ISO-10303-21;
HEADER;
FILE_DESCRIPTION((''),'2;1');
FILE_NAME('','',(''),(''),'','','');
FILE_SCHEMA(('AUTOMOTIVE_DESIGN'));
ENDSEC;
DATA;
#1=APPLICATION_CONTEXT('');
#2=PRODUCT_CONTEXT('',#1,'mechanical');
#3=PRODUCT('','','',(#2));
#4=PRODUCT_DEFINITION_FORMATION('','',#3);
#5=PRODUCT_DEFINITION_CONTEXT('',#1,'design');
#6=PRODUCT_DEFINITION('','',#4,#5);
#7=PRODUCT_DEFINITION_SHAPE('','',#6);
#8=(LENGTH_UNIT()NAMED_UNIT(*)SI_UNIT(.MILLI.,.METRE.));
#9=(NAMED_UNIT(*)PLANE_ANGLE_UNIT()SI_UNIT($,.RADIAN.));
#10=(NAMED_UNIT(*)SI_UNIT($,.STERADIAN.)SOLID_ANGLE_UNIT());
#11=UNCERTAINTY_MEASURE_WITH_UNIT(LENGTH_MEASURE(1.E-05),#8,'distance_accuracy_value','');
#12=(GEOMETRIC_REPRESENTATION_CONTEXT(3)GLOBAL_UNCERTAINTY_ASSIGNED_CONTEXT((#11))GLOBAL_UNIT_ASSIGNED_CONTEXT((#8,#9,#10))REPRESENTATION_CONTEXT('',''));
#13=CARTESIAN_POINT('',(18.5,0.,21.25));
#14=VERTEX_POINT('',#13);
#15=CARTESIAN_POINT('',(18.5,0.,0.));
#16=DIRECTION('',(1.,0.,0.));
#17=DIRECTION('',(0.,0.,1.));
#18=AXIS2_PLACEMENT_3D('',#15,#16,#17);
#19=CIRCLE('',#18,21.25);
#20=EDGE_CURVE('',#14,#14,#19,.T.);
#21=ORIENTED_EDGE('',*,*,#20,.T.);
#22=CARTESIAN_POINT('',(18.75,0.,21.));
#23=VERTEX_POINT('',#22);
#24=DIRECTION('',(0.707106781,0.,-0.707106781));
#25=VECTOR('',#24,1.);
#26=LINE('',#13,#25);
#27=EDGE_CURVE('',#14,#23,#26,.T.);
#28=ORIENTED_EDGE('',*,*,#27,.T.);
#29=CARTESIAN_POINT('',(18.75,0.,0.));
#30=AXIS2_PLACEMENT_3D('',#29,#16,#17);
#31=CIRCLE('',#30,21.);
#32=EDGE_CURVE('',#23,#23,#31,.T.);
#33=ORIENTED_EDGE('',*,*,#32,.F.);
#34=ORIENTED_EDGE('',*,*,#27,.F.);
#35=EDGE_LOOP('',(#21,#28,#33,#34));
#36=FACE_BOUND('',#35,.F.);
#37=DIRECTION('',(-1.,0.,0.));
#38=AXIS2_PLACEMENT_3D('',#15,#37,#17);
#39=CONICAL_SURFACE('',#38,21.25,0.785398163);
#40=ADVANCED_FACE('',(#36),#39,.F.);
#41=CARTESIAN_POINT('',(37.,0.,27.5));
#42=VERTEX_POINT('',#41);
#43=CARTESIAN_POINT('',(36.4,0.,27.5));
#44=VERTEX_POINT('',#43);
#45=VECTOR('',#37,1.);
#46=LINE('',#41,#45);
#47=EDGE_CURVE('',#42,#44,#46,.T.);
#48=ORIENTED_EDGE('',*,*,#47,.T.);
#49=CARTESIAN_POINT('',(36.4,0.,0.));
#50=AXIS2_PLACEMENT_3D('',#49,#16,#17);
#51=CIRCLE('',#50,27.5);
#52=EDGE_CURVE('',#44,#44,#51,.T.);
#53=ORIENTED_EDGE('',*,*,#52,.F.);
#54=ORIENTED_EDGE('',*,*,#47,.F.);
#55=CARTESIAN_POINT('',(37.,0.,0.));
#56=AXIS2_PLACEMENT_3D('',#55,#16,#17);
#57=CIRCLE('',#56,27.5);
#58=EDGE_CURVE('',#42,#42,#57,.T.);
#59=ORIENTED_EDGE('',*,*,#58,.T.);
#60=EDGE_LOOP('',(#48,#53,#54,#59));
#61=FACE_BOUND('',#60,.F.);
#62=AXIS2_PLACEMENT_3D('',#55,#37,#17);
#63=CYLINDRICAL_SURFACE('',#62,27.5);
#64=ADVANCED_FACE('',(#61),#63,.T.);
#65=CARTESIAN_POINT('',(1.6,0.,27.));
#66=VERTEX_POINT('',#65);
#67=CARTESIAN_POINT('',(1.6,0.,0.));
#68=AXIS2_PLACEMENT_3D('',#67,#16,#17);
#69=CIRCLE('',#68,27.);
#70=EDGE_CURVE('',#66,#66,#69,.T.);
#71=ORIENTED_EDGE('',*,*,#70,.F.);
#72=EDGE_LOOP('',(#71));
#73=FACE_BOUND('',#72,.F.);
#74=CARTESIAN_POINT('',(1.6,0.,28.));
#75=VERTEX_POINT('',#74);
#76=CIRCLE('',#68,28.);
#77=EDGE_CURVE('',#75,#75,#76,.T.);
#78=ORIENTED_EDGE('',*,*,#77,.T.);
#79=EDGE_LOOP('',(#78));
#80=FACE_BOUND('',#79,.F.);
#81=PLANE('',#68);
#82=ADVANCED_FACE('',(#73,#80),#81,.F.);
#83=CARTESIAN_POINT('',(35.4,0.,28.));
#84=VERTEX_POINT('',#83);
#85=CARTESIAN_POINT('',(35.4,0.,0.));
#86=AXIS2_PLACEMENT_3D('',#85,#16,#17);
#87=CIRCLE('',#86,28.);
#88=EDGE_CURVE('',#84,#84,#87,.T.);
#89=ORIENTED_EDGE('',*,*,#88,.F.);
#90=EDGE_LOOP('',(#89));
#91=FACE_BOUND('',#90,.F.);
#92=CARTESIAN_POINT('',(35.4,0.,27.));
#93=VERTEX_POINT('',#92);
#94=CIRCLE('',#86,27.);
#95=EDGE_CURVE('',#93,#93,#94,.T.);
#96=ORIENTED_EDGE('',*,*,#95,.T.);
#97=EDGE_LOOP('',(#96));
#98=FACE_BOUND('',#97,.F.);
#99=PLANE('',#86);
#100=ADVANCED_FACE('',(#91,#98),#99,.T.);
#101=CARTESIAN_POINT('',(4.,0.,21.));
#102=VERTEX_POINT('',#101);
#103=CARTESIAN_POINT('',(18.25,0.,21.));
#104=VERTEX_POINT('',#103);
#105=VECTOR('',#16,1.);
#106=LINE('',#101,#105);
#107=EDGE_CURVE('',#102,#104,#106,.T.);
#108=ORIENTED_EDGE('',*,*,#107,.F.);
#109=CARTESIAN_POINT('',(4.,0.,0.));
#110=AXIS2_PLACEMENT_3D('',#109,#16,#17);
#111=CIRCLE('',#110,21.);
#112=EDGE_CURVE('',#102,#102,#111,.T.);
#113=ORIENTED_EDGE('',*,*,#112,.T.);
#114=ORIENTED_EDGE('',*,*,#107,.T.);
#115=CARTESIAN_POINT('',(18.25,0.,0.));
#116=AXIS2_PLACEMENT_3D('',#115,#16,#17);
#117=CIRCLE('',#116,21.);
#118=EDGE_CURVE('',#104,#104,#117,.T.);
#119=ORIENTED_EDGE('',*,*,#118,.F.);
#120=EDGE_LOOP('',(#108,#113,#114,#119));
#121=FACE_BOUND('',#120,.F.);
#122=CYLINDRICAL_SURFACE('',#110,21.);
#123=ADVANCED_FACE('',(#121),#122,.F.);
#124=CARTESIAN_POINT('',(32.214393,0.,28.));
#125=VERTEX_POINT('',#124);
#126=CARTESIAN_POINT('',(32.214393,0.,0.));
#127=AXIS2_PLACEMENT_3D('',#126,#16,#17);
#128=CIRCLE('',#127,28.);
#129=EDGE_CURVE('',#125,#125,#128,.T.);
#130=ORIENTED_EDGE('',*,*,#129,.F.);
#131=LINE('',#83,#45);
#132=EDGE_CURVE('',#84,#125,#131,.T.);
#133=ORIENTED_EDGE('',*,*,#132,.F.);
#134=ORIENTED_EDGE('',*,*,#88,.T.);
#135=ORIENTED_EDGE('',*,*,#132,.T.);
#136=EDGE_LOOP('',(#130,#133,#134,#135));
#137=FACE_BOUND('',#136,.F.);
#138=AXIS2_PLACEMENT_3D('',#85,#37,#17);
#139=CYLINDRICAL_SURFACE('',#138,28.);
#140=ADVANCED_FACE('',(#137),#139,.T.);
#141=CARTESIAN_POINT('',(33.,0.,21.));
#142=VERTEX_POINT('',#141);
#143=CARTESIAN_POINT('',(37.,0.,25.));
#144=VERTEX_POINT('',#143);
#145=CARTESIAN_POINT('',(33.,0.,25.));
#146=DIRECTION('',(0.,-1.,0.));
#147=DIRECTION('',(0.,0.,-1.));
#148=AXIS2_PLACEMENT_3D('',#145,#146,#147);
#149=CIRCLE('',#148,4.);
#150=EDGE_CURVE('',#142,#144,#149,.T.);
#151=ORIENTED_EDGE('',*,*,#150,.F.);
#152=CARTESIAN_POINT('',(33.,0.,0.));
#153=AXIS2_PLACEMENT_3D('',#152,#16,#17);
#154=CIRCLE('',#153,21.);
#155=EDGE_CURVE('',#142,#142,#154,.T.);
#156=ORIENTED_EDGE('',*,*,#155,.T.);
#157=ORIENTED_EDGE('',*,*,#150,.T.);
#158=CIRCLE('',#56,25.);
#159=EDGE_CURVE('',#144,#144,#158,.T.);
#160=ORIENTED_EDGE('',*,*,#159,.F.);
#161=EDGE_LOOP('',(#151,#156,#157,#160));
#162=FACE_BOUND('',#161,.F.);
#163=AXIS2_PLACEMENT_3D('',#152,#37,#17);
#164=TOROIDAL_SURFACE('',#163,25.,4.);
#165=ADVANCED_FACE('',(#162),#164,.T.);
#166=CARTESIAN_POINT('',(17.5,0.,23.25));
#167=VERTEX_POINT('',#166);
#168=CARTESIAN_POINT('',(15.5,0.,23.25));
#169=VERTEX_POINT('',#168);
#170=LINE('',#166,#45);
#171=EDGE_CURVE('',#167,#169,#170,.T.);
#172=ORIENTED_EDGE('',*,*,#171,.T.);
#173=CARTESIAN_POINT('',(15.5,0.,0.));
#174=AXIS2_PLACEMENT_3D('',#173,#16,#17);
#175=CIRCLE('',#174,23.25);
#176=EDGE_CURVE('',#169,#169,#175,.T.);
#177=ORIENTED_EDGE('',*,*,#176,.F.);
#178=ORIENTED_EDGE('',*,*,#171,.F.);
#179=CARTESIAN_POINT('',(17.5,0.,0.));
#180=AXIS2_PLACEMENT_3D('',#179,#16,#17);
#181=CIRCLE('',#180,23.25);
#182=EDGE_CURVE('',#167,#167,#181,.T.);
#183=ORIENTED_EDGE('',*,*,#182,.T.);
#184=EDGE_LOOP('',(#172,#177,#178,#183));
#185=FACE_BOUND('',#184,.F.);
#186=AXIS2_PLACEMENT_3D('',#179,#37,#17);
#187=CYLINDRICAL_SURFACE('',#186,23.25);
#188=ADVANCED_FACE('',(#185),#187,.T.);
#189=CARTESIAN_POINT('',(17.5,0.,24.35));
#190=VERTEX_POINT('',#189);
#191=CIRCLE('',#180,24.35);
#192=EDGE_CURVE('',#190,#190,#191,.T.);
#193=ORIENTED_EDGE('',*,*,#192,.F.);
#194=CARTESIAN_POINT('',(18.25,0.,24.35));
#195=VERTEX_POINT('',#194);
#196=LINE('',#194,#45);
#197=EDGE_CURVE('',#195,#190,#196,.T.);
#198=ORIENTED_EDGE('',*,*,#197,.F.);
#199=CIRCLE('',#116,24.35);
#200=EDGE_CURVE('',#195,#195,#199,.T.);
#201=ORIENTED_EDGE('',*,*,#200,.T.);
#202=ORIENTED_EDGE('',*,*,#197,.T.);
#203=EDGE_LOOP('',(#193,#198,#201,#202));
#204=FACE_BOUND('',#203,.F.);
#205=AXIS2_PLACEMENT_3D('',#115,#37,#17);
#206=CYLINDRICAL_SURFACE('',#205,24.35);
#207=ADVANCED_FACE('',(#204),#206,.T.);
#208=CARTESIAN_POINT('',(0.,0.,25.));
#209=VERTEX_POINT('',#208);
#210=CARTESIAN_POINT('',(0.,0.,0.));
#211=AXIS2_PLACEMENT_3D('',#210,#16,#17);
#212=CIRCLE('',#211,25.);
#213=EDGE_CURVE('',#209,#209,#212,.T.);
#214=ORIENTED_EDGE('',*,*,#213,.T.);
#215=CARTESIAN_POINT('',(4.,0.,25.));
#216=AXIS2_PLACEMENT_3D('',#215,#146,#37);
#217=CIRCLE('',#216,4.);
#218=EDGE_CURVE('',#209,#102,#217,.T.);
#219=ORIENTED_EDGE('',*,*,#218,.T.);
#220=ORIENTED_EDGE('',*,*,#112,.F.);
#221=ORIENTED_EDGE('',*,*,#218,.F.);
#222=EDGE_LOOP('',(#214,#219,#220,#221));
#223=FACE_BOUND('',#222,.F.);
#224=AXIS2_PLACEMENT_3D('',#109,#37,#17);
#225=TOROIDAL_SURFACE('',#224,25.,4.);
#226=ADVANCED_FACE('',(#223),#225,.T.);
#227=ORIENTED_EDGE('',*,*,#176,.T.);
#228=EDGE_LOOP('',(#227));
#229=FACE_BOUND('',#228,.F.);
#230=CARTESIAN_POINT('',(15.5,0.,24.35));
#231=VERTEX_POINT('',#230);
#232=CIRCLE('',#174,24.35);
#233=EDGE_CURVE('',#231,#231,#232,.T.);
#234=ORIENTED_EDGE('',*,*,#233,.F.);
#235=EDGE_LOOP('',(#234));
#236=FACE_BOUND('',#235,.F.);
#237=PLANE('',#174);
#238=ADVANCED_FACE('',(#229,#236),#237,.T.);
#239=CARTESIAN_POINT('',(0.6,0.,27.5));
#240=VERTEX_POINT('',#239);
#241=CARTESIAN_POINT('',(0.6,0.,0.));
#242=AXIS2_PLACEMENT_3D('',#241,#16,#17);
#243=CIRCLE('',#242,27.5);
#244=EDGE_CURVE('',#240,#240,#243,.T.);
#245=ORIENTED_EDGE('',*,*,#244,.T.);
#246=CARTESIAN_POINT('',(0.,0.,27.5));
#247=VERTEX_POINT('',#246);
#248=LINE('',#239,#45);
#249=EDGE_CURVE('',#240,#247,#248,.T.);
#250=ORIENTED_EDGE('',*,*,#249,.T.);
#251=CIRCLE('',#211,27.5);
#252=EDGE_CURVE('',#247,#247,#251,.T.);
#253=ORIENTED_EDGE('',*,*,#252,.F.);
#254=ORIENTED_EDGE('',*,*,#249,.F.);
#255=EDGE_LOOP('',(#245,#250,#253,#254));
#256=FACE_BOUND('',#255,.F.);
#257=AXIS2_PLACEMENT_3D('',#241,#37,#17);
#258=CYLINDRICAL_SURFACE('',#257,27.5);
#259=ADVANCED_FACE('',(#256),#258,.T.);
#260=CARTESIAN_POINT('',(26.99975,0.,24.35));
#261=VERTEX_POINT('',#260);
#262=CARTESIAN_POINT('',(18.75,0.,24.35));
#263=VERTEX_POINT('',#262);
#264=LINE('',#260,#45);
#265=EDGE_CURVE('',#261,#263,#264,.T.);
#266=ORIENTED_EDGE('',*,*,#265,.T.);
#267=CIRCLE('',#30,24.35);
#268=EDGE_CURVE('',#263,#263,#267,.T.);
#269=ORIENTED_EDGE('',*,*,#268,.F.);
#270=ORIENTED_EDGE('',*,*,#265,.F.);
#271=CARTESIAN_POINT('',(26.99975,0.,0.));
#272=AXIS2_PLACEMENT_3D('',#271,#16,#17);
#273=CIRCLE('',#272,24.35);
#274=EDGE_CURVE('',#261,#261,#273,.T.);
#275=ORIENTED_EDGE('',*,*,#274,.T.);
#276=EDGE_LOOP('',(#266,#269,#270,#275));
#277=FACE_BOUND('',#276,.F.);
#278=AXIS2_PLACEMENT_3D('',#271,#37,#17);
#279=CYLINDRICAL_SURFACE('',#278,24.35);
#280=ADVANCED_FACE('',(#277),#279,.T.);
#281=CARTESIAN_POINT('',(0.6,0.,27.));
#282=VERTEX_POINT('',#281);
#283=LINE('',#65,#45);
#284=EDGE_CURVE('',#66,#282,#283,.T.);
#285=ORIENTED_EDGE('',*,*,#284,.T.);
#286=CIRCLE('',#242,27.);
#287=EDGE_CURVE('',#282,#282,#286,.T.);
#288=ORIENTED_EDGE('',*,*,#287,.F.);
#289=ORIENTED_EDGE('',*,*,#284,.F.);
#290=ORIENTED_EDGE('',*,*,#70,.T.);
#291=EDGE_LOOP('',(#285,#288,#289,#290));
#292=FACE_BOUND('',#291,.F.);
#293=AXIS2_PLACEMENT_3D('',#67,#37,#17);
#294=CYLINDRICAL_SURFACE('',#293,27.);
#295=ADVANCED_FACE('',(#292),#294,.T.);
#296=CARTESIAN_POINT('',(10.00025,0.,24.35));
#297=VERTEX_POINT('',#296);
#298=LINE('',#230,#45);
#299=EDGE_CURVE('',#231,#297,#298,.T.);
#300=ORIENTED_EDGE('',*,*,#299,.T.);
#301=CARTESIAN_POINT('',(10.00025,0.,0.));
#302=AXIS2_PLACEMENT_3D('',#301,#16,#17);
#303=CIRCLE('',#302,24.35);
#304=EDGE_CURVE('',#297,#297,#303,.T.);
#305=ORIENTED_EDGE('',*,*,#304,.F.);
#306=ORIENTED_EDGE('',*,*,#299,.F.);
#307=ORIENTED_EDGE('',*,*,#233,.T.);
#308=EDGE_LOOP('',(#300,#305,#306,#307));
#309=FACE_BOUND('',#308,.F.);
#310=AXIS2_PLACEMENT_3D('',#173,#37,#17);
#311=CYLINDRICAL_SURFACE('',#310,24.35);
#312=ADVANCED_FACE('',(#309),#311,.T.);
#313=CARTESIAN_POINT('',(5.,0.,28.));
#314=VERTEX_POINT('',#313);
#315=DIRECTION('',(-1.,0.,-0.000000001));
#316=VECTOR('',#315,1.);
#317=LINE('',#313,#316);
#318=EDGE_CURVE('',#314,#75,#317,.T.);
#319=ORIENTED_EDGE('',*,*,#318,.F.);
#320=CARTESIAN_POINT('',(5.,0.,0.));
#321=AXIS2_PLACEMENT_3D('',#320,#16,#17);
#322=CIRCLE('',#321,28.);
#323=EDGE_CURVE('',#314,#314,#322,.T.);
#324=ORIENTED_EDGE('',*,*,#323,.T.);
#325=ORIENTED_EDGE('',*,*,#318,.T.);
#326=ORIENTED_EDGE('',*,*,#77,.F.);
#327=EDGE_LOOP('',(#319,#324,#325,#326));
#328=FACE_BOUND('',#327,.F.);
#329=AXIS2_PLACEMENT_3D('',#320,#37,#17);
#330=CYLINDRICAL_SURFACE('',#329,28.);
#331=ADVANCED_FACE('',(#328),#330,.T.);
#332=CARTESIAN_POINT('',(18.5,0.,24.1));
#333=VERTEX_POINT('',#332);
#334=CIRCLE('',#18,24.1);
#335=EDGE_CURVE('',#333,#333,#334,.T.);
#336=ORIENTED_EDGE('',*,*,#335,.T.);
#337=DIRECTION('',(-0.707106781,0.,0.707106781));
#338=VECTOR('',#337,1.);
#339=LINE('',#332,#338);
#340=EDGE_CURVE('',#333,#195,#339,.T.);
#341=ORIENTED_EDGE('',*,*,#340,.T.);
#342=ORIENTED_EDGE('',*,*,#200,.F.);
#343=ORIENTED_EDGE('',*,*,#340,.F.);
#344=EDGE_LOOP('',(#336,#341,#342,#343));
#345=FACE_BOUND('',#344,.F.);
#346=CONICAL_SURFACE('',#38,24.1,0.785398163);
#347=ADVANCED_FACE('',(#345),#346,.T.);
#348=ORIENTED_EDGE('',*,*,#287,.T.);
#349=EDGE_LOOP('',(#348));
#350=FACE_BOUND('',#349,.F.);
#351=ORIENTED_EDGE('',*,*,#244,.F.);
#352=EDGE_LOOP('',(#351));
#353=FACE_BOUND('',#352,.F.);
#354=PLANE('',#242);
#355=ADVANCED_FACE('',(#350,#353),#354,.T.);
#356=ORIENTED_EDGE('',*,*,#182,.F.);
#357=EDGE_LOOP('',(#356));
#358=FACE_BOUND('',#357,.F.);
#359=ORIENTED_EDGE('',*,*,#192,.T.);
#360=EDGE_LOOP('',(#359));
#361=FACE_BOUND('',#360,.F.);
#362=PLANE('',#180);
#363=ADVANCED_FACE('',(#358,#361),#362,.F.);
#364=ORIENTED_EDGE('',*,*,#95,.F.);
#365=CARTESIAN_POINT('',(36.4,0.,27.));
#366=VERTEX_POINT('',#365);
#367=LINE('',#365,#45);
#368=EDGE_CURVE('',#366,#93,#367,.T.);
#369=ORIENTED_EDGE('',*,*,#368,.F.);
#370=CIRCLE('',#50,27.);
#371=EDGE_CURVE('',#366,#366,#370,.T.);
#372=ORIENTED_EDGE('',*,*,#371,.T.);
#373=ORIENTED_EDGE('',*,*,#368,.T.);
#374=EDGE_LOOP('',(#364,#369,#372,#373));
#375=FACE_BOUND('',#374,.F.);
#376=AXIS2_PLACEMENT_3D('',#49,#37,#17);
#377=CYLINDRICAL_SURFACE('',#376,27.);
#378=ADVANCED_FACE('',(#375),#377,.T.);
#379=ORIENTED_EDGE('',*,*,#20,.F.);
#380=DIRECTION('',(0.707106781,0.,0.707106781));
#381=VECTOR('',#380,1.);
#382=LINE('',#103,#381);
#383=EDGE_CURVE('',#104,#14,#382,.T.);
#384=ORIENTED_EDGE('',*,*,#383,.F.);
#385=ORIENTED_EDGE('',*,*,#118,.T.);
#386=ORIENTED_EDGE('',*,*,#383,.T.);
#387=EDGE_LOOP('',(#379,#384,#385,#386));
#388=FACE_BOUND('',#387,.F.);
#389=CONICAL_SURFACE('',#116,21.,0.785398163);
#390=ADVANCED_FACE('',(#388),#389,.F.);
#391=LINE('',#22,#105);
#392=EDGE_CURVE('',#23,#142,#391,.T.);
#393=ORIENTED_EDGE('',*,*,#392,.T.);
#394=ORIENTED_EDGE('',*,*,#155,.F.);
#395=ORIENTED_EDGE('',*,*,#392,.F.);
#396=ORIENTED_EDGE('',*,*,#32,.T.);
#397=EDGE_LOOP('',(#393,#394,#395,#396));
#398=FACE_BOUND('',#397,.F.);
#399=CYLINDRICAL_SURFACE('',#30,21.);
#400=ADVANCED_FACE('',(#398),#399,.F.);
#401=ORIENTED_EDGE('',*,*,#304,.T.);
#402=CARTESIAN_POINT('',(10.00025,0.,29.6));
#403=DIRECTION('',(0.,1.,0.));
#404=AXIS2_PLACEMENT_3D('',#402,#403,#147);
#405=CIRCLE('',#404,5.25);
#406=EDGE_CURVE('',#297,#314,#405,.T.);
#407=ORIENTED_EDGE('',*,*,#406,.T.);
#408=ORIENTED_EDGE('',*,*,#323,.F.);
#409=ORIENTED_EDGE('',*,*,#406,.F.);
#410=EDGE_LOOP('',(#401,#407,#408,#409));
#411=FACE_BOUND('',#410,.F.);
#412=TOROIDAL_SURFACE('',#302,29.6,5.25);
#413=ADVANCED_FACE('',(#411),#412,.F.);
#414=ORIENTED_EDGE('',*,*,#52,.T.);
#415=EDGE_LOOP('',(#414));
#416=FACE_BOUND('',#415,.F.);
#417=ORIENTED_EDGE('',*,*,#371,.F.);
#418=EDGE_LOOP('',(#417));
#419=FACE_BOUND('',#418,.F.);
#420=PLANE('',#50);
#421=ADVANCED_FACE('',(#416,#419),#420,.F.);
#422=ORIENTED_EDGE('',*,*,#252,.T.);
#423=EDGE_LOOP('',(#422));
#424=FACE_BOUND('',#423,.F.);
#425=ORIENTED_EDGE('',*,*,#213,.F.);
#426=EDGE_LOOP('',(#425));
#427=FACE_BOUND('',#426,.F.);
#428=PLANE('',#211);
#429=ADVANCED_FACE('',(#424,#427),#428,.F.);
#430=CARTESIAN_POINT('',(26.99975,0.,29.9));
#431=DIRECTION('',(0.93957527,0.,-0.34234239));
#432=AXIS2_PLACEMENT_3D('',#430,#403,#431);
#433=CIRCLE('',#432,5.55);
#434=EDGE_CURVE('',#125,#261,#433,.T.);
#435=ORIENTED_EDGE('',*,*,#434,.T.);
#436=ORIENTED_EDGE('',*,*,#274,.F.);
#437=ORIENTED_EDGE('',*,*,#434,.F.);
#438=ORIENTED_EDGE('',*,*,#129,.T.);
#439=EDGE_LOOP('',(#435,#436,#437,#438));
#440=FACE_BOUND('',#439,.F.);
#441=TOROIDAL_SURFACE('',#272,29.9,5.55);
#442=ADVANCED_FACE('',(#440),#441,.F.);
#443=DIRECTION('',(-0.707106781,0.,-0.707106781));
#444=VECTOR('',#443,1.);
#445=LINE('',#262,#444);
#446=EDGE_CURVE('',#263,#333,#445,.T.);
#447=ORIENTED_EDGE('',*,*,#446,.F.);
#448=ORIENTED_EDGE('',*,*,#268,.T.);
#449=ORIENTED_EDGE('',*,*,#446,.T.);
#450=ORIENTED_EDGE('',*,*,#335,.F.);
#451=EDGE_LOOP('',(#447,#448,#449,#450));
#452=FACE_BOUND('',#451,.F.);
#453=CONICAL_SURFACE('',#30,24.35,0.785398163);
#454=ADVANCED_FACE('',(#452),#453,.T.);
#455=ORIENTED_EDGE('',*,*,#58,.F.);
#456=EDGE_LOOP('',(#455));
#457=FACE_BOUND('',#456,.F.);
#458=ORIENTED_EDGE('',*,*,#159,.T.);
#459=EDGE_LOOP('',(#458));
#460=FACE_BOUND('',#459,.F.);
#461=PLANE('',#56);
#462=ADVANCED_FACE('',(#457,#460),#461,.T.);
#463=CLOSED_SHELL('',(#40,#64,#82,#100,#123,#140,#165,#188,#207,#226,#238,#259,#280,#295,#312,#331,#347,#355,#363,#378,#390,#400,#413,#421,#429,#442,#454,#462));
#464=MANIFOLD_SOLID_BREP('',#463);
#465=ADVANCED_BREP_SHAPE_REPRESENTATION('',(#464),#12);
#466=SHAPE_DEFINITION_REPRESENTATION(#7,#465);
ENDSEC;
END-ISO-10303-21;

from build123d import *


# Not quite as in the source:
# - ends of sketch curves that miss each other by under 0.0002 mm in the source are joined


with BuildPart() as f1:
    # F0 (on Front) → F1 (revolve)
    with BuildSketch(Plane.XZ):
        with BuildLine():
            Line((4, 21), (18.25, 21))
            Line((18.25, 21), (18.5, 21.25))
            Line((18.5, 21.25), (18.75, 21))
            Line((18.75, 21), (33, 21))
            ThreePointArc((33, 21), (35.8284271247, 22.1715728753), (37, 25))
            Line((37, 25), (37, 27.5))
            Line((37, 27.5), (36.4, 27.5))
            Line((36.4, 27.5), (36.4, 27))
            Line((36.4, 27), (35.4, 27))
            Line((35.4, 27), (35.4, 28))
            Line((35.4, 28), (32.214393, 28))
            ThreePointArc((32.214393, 28), (30.1823197382, 25.3531604535), (26.99975, 24.35))
            Line((26.99975, 24.35), (18.75, 24.35))
            Line((18.75, 24.35), (18.5, 24.1))
            Line((18.5, 24.1), (18.25, 24.35))
            Line((18.25, 24.35), (17.5, 24.35))
            Line((17.5, 24.35), (17.5, 23.25))
            Line((17.5, 23.25), (15.5, 23.25))
            Line((15.5, 23.25), (15.5, 24.35))
            Line((15.5, 24.35), (10.00025, 24.35))
            ThreePointArc((10.00025, 24.35), (6.9048905694, 25.3595695979), (5.0000000057, 28.0000000018))
            Line((5.0000000057, 28.0000000018), (1.6, 28))
            Line((1.6, 28), (1.6, 27))
            Line((1.6, 27), (0.6, 27))
            Line((0.6, 27), (0.6, 27.5))
            Line((0.6, 27.5), (0, 27.5))
            Line((0, 27.5), (0, 25))
            ThreePointArc((0, 25), (1.1715728753, 22.1715728753), (4, 21))
        make_face()
    revolve(axis=Axis((18.5, 0, 0), (1, 0, 0)))


solid = f1.part
